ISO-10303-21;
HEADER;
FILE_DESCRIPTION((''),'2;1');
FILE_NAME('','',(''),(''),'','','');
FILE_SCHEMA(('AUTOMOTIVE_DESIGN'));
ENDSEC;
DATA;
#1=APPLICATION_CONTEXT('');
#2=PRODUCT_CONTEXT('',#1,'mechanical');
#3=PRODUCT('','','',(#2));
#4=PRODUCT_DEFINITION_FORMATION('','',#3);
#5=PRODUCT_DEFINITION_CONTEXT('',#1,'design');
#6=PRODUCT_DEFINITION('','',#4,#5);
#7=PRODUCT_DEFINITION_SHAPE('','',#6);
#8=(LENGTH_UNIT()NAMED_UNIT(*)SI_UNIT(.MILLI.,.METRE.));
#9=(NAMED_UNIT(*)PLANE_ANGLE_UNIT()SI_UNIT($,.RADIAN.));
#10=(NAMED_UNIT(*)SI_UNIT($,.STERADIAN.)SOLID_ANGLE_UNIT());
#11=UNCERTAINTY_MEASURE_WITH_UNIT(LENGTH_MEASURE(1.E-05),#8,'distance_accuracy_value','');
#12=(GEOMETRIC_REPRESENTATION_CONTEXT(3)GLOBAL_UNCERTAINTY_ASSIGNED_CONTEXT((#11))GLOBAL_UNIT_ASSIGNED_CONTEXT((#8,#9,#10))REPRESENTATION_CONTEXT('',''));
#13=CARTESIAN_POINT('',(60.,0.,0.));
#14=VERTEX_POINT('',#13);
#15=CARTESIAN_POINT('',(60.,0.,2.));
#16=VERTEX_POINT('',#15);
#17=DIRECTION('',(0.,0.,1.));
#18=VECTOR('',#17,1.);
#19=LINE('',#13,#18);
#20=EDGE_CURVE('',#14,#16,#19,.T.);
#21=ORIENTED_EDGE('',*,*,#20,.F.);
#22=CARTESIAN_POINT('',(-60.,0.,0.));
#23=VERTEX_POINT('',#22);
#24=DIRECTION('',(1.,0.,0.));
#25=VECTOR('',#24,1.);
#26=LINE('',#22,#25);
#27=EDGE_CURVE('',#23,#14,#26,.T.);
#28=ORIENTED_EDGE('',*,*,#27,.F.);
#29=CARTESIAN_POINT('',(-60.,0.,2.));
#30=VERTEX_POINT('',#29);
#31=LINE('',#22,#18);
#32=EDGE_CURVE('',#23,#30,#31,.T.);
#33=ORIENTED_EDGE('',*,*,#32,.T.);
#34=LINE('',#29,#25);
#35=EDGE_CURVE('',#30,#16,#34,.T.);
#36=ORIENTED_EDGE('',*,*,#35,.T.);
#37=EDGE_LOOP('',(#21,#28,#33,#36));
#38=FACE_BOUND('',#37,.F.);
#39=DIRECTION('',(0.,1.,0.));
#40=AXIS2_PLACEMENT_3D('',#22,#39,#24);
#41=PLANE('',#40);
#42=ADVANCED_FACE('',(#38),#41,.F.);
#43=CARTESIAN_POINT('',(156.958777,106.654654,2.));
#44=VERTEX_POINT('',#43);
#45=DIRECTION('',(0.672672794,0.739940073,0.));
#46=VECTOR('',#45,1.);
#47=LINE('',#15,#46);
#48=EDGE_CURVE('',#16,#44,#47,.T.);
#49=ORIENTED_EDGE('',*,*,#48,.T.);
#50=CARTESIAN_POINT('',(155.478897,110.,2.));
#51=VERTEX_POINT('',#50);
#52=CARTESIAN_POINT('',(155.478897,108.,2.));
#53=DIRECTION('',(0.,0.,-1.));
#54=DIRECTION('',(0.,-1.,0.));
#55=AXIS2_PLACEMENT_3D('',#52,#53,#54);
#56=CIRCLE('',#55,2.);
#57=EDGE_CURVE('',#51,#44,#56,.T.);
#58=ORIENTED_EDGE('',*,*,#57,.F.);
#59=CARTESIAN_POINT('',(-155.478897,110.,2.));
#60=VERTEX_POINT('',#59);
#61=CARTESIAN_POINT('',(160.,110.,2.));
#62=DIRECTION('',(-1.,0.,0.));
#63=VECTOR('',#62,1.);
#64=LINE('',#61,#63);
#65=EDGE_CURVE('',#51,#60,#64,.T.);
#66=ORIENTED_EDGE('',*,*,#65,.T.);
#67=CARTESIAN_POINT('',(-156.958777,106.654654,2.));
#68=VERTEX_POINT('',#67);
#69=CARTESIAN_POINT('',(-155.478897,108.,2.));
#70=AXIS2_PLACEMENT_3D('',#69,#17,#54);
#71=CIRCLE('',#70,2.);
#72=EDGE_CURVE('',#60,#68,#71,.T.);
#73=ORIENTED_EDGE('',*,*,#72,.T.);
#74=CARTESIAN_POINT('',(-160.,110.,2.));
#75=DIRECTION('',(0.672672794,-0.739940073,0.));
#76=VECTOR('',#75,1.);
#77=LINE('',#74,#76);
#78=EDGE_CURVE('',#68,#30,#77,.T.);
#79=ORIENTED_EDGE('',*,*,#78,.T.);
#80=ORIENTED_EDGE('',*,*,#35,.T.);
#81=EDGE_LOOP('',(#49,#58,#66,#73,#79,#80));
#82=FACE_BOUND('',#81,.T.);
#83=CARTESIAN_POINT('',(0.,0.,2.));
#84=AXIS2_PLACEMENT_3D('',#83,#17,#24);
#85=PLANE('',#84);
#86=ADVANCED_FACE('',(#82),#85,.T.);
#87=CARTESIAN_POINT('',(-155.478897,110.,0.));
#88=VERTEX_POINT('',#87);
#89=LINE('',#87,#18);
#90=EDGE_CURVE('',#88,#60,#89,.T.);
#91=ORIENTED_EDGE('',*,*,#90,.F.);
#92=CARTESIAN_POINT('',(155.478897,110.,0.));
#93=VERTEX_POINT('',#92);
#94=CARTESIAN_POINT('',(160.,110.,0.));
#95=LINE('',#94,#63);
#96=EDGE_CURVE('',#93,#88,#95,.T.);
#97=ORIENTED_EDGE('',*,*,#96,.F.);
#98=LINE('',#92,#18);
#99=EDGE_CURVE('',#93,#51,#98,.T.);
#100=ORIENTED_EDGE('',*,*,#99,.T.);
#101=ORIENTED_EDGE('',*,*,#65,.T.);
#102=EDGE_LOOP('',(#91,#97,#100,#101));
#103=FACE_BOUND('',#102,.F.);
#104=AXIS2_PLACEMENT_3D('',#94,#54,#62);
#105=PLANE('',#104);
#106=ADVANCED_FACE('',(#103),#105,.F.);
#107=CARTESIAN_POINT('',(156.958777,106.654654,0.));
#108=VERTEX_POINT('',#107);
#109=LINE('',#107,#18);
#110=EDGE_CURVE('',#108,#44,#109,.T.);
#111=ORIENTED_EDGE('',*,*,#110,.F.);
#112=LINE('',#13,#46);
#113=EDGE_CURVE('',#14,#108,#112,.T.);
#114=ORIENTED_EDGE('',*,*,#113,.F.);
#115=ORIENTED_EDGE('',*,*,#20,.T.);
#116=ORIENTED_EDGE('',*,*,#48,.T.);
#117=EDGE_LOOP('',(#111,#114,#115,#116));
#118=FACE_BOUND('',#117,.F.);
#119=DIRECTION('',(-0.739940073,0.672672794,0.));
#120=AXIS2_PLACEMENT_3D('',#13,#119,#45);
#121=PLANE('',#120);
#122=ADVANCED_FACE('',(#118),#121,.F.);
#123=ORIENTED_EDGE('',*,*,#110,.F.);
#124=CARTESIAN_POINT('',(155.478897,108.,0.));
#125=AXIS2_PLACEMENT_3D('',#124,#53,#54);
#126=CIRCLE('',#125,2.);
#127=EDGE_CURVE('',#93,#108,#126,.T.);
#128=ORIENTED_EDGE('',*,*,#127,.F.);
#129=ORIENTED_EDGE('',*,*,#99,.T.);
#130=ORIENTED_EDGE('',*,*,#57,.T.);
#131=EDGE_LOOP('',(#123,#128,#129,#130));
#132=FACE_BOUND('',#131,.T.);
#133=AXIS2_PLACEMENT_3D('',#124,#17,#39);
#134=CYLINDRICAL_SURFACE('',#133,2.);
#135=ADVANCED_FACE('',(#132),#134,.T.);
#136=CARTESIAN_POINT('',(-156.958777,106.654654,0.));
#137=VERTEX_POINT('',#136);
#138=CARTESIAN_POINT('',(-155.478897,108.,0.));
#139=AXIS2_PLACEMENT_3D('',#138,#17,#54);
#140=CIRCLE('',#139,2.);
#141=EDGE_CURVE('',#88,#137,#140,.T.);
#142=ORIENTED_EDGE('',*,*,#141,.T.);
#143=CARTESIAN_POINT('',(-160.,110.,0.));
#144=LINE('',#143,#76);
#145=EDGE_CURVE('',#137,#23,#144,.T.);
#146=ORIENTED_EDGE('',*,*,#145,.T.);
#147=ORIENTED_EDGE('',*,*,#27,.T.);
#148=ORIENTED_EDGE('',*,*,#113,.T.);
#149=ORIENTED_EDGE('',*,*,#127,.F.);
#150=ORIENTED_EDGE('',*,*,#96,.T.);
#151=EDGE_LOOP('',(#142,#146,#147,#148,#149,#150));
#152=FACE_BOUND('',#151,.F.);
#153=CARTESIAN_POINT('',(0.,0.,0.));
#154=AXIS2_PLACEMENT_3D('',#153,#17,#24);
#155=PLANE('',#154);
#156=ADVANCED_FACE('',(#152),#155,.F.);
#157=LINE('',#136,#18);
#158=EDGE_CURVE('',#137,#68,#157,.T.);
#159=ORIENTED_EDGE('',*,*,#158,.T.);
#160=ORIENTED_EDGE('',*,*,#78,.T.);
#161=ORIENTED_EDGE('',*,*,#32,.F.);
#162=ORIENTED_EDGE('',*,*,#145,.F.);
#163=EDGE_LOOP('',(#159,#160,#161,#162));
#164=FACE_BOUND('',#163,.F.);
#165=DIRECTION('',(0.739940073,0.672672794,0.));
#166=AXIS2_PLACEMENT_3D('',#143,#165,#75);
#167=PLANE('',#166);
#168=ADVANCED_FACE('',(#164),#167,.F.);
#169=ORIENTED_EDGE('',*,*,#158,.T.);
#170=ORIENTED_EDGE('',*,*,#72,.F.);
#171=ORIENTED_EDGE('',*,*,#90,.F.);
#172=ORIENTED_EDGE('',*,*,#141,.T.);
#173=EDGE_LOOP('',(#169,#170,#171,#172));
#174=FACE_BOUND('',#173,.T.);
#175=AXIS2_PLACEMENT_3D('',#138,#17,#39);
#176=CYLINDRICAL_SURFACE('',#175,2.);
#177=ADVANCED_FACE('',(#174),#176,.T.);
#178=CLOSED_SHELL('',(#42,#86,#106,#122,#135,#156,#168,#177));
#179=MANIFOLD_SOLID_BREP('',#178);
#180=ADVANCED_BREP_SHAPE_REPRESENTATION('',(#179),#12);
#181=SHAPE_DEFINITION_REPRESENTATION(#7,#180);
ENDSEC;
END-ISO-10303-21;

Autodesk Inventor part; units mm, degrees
ref_plane "YZ Plane" through (0, 0, 0) normal (1, 0, 0) x (0, 1, 0)
ref_plane "XZ Plane" through (0, 0, 0) normal (0, 1, 0) x (-1, 0, 0)
ref_plane "XY Plane" through (0, 0, 0) normal (0, 0, 1) x (1, 0, 0)
sketch "Sketch1" plane through (0, 0, 0) normal (0, 0, 1) x (1, 0, 0)
  line L0 (-160, 110) -> (-60, 0)
  line L1 (-60, 0) -> (60, 0)
  line L2 (60, 0) -> (160, 110)
  line L3 (160, 110) -> (-160, 110)
  point P0 (0, 0)
  point P1 (0, 0)
  point P2 (0, 110)
  dimension "d0" = 110
  dimension "d1" = 120
  dimension "d2" = 320
extrude "Plate1" add sketch "Sketch1" along normal blind 2
fillet "Corner Round1" radius 2 2 edges at (160, 110, 1) (-160, 110, 1)
equation "\"d3\" = Thickness"
equation "\"BendRadius\" = Thickness"
equation "\"BendReliefWidth\" = Thickness"
equation "\"BendReliefDepth\" = 0.5 * Thickness"
equation "\"CornerReliefSize\" = 4 * Thickness"
equation "\"MinimumRemnant\" = 2 * Thickness"
equation "\"TransitionRadius\" = BendRadius"
equation "\"JacobiRadiusSize\" = BendRadius"
equation "\"GapSize\" = Thickness"
equation "\"Thickness\" = 2"
properties part number "ДМФ 052 торец лотка кормовой v2.0"
